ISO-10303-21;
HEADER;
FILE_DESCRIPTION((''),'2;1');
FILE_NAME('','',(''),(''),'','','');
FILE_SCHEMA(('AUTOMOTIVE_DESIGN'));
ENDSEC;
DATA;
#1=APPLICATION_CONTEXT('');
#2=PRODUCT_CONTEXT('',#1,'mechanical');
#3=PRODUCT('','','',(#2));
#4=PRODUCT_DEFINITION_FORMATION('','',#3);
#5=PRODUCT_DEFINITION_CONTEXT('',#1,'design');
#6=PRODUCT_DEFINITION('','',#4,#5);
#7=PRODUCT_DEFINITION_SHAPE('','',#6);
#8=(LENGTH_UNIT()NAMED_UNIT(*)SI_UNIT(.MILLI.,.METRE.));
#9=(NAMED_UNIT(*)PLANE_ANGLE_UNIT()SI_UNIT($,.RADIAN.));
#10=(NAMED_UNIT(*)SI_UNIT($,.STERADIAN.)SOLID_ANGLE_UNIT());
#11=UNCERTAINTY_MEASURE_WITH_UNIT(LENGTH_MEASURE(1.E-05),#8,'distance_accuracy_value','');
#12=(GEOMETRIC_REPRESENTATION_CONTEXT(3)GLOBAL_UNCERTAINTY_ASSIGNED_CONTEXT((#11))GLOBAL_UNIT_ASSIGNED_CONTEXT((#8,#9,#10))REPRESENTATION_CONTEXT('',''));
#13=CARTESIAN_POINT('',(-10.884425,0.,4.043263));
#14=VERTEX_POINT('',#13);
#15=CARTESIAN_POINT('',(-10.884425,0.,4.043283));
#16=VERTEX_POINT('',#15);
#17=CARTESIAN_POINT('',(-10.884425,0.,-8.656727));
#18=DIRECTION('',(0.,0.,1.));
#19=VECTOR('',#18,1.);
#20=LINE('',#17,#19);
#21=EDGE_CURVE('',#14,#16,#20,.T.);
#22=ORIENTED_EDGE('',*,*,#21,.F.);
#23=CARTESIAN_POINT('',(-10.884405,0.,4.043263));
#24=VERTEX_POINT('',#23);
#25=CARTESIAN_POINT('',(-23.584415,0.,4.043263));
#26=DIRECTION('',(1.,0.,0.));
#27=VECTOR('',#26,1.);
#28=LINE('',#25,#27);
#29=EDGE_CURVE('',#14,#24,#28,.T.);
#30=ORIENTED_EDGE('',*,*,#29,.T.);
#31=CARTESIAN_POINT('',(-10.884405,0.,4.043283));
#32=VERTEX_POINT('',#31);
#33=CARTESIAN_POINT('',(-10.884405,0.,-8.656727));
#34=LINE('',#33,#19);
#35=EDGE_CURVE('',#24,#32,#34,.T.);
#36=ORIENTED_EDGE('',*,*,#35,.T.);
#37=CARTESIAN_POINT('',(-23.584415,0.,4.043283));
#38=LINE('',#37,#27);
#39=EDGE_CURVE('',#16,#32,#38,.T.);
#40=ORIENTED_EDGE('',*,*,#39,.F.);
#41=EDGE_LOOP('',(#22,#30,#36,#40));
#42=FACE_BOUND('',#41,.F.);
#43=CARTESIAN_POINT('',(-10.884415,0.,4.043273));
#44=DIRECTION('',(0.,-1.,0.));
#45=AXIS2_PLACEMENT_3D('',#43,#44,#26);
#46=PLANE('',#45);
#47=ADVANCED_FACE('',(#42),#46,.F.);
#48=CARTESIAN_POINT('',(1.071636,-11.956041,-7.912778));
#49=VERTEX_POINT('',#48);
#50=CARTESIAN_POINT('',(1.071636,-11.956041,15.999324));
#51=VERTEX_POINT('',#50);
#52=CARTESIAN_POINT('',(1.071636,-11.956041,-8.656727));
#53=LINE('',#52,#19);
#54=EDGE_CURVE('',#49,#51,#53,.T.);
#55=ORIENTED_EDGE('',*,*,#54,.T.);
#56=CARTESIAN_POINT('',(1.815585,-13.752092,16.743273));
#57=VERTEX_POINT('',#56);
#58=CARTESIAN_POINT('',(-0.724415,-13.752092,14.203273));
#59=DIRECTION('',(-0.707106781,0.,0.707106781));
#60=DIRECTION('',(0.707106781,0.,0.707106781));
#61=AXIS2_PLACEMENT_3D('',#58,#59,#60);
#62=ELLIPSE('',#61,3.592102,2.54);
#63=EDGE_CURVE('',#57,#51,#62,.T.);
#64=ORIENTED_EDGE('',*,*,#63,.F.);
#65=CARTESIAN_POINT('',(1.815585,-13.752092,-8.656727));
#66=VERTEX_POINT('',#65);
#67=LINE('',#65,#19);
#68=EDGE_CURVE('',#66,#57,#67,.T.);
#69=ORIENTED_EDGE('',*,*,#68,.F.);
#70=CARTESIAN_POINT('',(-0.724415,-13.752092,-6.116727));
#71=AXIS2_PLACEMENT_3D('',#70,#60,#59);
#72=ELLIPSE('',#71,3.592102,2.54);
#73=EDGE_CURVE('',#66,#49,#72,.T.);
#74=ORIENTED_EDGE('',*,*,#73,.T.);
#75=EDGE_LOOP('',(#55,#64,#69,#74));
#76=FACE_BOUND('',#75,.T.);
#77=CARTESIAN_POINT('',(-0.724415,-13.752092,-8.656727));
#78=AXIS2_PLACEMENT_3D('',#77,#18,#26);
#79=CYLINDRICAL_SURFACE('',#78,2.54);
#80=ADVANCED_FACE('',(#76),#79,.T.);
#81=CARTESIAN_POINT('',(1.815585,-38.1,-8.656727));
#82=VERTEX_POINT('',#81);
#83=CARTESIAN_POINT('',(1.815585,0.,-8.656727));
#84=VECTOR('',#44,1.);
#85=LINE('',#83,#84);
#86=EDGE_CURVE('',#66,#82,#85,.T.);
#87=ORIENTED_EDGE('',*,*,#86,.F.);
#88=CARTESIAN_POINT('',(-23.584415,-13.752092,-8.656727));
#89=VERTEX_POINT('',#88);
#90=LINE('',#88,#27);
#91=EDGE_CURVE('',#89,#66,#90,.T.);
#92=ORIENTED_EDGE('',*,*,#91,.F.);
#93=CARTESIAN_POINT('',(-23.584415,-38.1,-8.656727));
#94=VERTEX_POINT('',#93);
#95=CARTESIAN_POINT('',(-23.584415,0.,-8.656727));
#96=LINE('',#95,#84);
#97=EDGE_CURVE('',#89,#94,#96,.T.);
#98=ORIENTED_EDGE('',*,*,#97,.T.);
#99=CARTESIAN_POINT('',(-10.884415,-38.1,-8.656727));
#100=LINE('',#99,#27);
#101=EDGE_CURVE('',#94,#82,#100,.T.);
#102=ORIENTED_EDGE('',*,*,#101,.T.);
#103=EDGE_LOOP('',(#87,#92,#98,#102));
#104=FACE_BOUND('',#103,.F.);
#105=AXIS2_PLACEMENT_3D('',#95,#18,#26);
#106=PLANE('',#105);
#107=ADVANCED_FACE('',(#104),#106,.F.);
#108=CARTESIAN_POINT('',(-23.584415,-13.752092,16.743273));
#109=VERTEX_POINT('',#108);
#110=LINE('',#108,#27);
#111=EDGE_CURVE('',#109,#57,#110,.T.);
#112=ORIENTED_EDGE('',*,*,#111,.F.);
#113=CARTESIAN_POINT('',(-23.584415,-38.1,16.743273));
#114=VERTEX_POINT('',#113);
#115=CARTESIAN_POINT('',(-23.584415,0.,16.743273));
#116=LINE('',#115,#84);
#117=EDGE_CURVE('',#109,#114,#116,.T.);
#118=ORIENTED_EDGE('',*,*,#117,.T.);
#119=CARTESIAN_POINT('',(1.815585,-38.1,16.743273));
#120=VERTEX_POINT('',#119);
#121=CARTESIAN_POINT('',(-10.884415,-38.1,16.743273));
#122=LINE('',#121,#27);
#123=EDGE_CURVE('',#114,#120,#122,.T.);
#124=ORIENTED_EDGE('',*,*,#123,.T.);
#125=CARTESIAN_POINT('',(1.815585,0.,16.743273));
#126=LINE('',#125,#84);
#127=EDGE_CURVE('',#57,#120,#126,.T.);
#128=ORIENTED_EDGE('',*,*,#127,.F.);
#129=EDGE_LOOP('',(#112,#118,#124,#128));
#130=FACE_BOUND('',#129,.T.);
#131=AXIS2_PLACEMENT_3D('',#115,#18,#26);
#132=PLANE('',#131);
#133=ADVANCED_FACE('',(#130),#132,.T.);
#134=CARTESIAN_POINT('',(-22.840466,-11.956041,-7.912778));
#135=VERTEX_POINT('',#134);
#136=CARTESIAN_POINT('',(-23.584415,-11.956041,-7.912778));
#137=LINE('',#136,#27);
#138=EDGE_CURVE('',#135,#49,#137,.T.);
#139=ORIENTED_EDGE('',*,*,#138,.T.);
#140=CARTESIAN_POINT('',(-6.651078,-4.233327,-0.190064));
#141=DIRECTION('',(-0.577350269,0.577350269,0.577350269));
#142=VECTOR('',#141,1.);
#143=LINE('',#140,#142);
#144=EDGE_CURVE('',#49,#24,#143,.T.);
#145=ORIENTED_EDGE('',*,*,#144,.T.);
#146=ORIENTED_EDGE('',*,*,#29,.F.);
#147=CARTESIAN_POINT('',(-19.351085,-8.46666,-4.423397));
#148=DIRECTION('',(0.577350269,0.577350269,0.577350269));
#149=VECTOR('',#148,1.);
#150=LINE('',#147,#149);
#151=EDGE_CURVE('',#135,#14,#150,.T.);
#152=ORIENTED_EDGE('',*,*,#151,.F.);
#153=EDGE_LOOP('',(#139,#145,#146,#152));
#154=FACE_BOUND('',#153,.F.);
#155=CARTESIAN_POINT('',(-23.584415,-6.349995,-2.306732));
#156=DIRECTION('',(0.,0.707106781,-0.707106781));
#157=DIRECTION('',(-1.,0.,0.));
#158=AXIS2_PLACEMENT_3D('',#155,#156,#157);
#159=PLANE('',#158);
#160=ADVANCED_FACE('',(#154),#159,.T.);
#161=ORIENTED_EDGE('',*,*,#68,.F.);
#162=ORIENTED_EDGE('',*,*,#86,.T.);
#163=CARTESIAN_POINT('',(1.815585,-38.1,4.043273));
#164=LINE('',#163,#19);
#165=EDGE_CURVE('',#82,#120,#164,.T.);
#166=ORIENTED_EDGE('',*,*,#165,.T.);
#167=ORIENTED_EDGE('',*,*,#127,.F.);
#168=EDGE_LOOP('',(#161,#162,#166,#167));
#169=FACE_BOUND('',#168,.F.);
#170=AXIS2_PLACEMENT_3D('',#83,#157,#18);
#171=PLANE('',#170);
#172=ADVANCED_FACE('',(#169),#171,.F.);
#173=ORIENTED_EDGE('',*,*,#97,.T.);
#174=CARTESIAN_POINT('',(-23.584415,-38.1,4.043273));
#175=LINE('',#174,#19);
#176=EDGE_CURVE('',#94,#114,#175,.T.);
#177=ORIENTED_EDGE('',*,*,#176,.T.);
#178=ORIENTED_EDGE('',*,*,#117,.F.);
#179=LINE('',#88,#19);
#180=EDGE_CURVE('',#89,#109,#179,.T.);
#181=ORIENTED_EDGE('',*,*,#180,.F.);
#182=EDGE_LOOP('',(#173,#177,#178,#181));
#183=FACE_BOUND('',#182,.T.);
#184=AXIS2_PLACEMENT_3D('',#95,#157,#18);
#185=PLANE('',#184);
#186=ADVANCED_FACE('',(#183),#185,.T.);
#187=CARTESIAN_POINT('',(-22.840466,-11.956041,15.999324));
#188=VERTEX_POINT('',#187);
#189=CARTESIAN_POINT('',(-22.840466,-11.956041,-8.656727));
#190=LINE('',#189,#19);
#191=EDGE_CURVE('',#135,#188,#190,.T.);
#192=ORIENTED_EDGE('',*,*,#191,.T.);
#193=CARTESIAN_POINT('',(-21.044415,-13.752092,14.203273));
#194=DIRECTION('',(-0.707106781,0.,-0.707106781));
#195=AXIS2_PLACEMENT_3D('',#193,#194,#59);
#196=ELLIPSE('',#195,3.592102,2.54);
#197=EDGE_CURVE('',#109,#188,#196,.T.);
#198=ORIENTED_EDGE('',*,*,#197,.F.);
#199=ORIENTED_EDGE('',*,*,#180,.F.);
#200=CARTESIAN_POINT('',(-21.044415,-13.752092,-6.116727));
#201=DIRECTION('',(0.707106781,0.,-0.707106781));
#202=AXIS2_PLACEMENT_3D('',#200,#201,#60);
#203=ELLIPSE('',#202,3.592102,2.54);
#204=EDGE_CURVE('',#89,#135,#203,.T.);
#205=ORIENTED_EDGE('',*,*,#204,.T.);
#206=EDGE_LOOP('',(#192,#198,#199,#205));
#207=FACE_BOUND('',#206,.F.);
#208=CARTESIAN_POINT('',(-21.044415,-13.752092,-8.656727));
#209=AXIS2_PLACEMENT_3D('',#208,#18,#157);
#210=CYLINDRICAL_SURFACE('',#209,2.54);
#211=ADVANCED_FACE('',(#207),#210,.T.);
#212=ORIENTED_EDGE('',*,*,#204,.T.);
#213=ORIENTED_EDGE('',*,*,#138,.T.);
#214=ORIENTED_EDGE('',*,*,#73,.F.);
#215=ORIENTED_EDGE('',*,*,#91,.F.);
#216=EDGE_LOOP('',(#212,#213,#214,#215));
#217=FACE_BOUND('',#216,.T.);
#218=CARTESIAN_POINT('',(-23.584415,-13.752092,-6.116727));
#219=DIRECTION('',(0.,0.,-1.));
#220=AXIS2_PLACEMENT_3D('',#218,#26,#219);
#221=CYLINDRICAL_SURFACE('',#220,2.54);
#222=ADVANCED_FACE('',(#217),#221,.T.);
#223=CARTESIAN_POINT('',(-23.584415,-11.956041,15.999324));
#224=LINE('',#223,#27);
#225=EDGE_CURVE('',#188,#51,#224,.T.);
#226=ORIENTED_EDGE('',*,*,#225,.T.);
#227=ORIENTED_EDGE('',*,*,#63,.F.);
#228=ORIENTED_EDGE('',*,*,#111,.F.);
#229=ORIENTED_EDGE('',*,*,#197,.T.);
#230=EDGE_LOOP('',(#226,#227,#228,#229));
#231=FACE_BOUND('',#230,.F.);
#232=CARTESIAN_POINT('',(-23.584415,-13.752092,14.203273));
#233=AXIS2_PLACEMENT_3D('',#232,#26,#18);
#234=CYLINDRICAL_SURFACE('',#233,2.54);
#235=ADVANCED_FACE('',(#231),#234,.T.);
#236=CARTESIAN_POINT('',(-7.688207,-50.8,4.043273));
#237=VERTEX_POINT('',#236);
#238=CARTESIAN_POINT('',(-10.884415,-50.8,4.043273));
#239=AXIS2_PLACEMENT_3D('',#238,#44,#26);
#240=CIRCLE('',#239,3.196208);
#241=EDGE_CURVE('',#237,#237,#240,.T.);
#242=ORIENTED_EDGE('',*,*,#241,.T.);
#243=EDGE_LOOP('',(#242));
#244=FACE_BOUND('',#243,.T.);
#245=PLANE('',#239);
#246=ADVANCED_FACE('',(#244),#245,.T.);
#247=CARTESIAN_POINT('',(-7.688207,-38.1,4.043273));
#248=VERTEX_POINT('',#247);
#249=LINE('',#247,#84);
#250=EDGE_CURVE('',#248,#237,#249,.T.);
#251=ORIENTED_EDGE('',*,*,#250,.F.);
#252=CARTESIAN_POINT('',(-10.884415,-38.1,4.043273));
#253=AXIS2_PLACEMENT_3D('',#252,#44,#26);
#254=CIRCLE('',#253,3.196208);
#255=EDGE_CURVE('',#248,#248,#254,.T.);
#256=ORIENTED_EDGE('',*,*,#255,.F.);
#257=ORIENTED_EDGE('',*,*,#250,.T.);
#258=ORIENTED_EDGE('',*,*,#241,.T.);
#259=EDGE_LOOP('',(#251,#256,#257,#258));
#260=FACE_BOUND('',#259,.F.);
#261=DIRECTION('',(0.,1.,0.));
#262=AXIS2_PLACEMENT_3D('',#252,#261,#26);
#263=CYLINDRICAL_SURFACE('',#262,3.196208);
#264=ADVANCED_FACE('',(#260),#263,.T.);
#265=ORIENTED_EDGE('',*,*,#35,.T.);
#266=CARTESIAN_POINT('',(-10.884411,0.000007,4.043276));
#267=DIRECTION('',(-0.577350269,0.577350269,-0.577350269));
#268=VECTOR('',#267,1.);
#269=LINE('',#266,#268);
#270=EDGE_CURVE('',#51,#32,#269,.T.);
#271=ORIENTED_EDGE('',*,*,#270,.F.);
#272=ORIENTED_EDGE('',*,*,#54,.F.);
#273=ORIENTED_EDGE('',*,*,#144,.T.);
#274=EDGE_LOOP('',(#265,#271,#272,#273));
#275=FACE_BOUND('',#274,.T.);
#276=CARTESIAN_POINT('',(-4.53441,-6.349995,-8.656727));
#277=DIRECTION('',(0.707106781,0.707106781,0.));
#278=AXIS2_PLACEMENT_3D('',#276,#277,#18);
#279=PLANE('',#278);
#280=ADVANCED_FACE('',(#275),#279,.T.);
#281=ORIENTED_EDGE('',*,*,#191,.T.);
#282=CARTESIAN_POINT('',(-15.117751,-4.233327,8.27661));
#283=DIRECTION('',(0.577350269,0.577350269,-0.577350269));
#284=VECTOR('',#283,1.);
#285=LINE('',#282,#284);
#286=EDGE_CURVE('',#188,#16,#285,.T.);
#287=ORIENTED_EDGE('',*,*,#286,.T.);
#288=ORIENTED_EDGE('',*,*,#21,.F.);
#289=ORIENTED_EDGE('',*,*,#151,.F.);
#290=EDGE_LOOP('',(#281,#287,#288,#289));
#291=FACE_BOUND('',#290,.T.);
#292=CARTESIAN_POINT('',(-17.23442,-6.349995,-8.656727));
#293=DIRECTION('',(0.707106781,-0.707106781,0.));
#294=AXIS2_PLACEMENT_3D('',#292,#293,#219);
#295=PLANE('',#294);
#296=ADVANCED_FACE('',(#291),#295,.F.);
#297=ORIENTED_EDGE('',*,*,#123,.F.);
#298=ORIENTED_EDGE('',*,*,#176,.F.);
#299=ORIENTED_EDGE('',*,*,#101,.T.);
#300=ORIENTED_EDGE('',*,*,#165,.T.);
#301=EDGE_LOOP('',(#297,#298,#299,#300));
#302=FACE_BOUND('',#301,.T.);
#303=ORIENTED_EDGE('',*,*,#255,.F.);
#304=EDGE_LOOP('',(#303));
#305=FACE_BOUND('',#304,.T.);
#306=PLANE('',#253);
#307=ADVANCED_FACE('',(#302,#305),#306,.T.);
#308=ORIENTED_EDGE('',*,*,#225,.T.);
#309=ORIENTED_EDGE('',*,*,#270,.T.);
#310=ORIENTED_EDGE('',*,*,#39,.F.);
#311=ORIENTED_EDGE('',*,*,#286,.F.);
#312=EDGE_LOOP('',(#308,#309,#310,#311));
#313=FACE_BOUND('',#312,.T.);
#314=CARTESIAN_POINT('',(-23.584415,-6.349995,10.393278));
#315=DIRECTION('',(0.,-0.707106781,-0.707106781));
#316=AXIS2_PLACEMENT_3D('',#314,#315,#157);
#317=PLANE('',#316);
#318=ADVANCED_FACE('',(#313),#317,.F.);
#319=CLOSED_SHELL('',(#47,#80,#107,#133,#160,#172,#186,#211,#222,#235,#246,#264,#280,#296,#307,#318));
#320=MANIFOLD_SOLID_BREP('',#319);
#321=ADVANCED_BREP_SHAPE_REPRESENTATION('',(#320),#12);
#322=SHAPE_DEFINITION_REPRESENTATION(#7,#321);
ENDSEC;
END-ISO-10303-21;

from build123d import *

# Parameters (mm, degrees)
F0_W     = 25.4
F0_H     = 25.4
F1_DEPTH = 38.1
F2_R     = 3.1962081395
F3_DEPTH = 12.7
F4_SIZE  = 12.69999
F5_R     = 2.54


# Not quite as in the source:
# - a fillet or chamfer is up to 0.001 mm smaller than in the source, because OpenCascade refuses the exact size


with BuildPart() as f1:
    # F0 (on Front) → F1 (new body)
    with BuildSketch(Plane.XZ):
        with Locations((-10.8844147762, 4.0432729903)):
            Rectangle(F0_W, F0_H)
    extrude(amount=F1_DEPTH)

    # F2 (on face) → F3 (join)
    with BuildSketch(Plane.XZ.offset(38.1)):
        with Locations((-10.8844147762, 4.0432729903)):
            Circle(F2_R)
    extrude(amount=F3_DEPTH)

    # F4 (size 12.7 in the source; OpenCascade refuses exactly that, so slightly less here)
    f4_edges = [f1.edges().sort_by_distance(p)[0] for p in [
        (-10.884415, 0, 16.743273),
        (-10.884415, 0, -8.656727),
        (1.815585, 0, 4.043273),
        (-23.584415, 0, 4.043273),
    ]]
    chamfer(f4_edges, length=F4_SIZE)

    # F5
    f5_edges = [f1.edges().sort_by_distance(p)[0] for p in [
        (-23.584415, -12.69999, 4.043273),
        (-10.884415, -12.69999, 16.743273),
        (1.815585, -12.69999, 4.043273),
        (-10.884415, -12.69999, -8.656727),
    ]]
    fillet(f5_edges, radius=F5_R)


solid = f1.part
